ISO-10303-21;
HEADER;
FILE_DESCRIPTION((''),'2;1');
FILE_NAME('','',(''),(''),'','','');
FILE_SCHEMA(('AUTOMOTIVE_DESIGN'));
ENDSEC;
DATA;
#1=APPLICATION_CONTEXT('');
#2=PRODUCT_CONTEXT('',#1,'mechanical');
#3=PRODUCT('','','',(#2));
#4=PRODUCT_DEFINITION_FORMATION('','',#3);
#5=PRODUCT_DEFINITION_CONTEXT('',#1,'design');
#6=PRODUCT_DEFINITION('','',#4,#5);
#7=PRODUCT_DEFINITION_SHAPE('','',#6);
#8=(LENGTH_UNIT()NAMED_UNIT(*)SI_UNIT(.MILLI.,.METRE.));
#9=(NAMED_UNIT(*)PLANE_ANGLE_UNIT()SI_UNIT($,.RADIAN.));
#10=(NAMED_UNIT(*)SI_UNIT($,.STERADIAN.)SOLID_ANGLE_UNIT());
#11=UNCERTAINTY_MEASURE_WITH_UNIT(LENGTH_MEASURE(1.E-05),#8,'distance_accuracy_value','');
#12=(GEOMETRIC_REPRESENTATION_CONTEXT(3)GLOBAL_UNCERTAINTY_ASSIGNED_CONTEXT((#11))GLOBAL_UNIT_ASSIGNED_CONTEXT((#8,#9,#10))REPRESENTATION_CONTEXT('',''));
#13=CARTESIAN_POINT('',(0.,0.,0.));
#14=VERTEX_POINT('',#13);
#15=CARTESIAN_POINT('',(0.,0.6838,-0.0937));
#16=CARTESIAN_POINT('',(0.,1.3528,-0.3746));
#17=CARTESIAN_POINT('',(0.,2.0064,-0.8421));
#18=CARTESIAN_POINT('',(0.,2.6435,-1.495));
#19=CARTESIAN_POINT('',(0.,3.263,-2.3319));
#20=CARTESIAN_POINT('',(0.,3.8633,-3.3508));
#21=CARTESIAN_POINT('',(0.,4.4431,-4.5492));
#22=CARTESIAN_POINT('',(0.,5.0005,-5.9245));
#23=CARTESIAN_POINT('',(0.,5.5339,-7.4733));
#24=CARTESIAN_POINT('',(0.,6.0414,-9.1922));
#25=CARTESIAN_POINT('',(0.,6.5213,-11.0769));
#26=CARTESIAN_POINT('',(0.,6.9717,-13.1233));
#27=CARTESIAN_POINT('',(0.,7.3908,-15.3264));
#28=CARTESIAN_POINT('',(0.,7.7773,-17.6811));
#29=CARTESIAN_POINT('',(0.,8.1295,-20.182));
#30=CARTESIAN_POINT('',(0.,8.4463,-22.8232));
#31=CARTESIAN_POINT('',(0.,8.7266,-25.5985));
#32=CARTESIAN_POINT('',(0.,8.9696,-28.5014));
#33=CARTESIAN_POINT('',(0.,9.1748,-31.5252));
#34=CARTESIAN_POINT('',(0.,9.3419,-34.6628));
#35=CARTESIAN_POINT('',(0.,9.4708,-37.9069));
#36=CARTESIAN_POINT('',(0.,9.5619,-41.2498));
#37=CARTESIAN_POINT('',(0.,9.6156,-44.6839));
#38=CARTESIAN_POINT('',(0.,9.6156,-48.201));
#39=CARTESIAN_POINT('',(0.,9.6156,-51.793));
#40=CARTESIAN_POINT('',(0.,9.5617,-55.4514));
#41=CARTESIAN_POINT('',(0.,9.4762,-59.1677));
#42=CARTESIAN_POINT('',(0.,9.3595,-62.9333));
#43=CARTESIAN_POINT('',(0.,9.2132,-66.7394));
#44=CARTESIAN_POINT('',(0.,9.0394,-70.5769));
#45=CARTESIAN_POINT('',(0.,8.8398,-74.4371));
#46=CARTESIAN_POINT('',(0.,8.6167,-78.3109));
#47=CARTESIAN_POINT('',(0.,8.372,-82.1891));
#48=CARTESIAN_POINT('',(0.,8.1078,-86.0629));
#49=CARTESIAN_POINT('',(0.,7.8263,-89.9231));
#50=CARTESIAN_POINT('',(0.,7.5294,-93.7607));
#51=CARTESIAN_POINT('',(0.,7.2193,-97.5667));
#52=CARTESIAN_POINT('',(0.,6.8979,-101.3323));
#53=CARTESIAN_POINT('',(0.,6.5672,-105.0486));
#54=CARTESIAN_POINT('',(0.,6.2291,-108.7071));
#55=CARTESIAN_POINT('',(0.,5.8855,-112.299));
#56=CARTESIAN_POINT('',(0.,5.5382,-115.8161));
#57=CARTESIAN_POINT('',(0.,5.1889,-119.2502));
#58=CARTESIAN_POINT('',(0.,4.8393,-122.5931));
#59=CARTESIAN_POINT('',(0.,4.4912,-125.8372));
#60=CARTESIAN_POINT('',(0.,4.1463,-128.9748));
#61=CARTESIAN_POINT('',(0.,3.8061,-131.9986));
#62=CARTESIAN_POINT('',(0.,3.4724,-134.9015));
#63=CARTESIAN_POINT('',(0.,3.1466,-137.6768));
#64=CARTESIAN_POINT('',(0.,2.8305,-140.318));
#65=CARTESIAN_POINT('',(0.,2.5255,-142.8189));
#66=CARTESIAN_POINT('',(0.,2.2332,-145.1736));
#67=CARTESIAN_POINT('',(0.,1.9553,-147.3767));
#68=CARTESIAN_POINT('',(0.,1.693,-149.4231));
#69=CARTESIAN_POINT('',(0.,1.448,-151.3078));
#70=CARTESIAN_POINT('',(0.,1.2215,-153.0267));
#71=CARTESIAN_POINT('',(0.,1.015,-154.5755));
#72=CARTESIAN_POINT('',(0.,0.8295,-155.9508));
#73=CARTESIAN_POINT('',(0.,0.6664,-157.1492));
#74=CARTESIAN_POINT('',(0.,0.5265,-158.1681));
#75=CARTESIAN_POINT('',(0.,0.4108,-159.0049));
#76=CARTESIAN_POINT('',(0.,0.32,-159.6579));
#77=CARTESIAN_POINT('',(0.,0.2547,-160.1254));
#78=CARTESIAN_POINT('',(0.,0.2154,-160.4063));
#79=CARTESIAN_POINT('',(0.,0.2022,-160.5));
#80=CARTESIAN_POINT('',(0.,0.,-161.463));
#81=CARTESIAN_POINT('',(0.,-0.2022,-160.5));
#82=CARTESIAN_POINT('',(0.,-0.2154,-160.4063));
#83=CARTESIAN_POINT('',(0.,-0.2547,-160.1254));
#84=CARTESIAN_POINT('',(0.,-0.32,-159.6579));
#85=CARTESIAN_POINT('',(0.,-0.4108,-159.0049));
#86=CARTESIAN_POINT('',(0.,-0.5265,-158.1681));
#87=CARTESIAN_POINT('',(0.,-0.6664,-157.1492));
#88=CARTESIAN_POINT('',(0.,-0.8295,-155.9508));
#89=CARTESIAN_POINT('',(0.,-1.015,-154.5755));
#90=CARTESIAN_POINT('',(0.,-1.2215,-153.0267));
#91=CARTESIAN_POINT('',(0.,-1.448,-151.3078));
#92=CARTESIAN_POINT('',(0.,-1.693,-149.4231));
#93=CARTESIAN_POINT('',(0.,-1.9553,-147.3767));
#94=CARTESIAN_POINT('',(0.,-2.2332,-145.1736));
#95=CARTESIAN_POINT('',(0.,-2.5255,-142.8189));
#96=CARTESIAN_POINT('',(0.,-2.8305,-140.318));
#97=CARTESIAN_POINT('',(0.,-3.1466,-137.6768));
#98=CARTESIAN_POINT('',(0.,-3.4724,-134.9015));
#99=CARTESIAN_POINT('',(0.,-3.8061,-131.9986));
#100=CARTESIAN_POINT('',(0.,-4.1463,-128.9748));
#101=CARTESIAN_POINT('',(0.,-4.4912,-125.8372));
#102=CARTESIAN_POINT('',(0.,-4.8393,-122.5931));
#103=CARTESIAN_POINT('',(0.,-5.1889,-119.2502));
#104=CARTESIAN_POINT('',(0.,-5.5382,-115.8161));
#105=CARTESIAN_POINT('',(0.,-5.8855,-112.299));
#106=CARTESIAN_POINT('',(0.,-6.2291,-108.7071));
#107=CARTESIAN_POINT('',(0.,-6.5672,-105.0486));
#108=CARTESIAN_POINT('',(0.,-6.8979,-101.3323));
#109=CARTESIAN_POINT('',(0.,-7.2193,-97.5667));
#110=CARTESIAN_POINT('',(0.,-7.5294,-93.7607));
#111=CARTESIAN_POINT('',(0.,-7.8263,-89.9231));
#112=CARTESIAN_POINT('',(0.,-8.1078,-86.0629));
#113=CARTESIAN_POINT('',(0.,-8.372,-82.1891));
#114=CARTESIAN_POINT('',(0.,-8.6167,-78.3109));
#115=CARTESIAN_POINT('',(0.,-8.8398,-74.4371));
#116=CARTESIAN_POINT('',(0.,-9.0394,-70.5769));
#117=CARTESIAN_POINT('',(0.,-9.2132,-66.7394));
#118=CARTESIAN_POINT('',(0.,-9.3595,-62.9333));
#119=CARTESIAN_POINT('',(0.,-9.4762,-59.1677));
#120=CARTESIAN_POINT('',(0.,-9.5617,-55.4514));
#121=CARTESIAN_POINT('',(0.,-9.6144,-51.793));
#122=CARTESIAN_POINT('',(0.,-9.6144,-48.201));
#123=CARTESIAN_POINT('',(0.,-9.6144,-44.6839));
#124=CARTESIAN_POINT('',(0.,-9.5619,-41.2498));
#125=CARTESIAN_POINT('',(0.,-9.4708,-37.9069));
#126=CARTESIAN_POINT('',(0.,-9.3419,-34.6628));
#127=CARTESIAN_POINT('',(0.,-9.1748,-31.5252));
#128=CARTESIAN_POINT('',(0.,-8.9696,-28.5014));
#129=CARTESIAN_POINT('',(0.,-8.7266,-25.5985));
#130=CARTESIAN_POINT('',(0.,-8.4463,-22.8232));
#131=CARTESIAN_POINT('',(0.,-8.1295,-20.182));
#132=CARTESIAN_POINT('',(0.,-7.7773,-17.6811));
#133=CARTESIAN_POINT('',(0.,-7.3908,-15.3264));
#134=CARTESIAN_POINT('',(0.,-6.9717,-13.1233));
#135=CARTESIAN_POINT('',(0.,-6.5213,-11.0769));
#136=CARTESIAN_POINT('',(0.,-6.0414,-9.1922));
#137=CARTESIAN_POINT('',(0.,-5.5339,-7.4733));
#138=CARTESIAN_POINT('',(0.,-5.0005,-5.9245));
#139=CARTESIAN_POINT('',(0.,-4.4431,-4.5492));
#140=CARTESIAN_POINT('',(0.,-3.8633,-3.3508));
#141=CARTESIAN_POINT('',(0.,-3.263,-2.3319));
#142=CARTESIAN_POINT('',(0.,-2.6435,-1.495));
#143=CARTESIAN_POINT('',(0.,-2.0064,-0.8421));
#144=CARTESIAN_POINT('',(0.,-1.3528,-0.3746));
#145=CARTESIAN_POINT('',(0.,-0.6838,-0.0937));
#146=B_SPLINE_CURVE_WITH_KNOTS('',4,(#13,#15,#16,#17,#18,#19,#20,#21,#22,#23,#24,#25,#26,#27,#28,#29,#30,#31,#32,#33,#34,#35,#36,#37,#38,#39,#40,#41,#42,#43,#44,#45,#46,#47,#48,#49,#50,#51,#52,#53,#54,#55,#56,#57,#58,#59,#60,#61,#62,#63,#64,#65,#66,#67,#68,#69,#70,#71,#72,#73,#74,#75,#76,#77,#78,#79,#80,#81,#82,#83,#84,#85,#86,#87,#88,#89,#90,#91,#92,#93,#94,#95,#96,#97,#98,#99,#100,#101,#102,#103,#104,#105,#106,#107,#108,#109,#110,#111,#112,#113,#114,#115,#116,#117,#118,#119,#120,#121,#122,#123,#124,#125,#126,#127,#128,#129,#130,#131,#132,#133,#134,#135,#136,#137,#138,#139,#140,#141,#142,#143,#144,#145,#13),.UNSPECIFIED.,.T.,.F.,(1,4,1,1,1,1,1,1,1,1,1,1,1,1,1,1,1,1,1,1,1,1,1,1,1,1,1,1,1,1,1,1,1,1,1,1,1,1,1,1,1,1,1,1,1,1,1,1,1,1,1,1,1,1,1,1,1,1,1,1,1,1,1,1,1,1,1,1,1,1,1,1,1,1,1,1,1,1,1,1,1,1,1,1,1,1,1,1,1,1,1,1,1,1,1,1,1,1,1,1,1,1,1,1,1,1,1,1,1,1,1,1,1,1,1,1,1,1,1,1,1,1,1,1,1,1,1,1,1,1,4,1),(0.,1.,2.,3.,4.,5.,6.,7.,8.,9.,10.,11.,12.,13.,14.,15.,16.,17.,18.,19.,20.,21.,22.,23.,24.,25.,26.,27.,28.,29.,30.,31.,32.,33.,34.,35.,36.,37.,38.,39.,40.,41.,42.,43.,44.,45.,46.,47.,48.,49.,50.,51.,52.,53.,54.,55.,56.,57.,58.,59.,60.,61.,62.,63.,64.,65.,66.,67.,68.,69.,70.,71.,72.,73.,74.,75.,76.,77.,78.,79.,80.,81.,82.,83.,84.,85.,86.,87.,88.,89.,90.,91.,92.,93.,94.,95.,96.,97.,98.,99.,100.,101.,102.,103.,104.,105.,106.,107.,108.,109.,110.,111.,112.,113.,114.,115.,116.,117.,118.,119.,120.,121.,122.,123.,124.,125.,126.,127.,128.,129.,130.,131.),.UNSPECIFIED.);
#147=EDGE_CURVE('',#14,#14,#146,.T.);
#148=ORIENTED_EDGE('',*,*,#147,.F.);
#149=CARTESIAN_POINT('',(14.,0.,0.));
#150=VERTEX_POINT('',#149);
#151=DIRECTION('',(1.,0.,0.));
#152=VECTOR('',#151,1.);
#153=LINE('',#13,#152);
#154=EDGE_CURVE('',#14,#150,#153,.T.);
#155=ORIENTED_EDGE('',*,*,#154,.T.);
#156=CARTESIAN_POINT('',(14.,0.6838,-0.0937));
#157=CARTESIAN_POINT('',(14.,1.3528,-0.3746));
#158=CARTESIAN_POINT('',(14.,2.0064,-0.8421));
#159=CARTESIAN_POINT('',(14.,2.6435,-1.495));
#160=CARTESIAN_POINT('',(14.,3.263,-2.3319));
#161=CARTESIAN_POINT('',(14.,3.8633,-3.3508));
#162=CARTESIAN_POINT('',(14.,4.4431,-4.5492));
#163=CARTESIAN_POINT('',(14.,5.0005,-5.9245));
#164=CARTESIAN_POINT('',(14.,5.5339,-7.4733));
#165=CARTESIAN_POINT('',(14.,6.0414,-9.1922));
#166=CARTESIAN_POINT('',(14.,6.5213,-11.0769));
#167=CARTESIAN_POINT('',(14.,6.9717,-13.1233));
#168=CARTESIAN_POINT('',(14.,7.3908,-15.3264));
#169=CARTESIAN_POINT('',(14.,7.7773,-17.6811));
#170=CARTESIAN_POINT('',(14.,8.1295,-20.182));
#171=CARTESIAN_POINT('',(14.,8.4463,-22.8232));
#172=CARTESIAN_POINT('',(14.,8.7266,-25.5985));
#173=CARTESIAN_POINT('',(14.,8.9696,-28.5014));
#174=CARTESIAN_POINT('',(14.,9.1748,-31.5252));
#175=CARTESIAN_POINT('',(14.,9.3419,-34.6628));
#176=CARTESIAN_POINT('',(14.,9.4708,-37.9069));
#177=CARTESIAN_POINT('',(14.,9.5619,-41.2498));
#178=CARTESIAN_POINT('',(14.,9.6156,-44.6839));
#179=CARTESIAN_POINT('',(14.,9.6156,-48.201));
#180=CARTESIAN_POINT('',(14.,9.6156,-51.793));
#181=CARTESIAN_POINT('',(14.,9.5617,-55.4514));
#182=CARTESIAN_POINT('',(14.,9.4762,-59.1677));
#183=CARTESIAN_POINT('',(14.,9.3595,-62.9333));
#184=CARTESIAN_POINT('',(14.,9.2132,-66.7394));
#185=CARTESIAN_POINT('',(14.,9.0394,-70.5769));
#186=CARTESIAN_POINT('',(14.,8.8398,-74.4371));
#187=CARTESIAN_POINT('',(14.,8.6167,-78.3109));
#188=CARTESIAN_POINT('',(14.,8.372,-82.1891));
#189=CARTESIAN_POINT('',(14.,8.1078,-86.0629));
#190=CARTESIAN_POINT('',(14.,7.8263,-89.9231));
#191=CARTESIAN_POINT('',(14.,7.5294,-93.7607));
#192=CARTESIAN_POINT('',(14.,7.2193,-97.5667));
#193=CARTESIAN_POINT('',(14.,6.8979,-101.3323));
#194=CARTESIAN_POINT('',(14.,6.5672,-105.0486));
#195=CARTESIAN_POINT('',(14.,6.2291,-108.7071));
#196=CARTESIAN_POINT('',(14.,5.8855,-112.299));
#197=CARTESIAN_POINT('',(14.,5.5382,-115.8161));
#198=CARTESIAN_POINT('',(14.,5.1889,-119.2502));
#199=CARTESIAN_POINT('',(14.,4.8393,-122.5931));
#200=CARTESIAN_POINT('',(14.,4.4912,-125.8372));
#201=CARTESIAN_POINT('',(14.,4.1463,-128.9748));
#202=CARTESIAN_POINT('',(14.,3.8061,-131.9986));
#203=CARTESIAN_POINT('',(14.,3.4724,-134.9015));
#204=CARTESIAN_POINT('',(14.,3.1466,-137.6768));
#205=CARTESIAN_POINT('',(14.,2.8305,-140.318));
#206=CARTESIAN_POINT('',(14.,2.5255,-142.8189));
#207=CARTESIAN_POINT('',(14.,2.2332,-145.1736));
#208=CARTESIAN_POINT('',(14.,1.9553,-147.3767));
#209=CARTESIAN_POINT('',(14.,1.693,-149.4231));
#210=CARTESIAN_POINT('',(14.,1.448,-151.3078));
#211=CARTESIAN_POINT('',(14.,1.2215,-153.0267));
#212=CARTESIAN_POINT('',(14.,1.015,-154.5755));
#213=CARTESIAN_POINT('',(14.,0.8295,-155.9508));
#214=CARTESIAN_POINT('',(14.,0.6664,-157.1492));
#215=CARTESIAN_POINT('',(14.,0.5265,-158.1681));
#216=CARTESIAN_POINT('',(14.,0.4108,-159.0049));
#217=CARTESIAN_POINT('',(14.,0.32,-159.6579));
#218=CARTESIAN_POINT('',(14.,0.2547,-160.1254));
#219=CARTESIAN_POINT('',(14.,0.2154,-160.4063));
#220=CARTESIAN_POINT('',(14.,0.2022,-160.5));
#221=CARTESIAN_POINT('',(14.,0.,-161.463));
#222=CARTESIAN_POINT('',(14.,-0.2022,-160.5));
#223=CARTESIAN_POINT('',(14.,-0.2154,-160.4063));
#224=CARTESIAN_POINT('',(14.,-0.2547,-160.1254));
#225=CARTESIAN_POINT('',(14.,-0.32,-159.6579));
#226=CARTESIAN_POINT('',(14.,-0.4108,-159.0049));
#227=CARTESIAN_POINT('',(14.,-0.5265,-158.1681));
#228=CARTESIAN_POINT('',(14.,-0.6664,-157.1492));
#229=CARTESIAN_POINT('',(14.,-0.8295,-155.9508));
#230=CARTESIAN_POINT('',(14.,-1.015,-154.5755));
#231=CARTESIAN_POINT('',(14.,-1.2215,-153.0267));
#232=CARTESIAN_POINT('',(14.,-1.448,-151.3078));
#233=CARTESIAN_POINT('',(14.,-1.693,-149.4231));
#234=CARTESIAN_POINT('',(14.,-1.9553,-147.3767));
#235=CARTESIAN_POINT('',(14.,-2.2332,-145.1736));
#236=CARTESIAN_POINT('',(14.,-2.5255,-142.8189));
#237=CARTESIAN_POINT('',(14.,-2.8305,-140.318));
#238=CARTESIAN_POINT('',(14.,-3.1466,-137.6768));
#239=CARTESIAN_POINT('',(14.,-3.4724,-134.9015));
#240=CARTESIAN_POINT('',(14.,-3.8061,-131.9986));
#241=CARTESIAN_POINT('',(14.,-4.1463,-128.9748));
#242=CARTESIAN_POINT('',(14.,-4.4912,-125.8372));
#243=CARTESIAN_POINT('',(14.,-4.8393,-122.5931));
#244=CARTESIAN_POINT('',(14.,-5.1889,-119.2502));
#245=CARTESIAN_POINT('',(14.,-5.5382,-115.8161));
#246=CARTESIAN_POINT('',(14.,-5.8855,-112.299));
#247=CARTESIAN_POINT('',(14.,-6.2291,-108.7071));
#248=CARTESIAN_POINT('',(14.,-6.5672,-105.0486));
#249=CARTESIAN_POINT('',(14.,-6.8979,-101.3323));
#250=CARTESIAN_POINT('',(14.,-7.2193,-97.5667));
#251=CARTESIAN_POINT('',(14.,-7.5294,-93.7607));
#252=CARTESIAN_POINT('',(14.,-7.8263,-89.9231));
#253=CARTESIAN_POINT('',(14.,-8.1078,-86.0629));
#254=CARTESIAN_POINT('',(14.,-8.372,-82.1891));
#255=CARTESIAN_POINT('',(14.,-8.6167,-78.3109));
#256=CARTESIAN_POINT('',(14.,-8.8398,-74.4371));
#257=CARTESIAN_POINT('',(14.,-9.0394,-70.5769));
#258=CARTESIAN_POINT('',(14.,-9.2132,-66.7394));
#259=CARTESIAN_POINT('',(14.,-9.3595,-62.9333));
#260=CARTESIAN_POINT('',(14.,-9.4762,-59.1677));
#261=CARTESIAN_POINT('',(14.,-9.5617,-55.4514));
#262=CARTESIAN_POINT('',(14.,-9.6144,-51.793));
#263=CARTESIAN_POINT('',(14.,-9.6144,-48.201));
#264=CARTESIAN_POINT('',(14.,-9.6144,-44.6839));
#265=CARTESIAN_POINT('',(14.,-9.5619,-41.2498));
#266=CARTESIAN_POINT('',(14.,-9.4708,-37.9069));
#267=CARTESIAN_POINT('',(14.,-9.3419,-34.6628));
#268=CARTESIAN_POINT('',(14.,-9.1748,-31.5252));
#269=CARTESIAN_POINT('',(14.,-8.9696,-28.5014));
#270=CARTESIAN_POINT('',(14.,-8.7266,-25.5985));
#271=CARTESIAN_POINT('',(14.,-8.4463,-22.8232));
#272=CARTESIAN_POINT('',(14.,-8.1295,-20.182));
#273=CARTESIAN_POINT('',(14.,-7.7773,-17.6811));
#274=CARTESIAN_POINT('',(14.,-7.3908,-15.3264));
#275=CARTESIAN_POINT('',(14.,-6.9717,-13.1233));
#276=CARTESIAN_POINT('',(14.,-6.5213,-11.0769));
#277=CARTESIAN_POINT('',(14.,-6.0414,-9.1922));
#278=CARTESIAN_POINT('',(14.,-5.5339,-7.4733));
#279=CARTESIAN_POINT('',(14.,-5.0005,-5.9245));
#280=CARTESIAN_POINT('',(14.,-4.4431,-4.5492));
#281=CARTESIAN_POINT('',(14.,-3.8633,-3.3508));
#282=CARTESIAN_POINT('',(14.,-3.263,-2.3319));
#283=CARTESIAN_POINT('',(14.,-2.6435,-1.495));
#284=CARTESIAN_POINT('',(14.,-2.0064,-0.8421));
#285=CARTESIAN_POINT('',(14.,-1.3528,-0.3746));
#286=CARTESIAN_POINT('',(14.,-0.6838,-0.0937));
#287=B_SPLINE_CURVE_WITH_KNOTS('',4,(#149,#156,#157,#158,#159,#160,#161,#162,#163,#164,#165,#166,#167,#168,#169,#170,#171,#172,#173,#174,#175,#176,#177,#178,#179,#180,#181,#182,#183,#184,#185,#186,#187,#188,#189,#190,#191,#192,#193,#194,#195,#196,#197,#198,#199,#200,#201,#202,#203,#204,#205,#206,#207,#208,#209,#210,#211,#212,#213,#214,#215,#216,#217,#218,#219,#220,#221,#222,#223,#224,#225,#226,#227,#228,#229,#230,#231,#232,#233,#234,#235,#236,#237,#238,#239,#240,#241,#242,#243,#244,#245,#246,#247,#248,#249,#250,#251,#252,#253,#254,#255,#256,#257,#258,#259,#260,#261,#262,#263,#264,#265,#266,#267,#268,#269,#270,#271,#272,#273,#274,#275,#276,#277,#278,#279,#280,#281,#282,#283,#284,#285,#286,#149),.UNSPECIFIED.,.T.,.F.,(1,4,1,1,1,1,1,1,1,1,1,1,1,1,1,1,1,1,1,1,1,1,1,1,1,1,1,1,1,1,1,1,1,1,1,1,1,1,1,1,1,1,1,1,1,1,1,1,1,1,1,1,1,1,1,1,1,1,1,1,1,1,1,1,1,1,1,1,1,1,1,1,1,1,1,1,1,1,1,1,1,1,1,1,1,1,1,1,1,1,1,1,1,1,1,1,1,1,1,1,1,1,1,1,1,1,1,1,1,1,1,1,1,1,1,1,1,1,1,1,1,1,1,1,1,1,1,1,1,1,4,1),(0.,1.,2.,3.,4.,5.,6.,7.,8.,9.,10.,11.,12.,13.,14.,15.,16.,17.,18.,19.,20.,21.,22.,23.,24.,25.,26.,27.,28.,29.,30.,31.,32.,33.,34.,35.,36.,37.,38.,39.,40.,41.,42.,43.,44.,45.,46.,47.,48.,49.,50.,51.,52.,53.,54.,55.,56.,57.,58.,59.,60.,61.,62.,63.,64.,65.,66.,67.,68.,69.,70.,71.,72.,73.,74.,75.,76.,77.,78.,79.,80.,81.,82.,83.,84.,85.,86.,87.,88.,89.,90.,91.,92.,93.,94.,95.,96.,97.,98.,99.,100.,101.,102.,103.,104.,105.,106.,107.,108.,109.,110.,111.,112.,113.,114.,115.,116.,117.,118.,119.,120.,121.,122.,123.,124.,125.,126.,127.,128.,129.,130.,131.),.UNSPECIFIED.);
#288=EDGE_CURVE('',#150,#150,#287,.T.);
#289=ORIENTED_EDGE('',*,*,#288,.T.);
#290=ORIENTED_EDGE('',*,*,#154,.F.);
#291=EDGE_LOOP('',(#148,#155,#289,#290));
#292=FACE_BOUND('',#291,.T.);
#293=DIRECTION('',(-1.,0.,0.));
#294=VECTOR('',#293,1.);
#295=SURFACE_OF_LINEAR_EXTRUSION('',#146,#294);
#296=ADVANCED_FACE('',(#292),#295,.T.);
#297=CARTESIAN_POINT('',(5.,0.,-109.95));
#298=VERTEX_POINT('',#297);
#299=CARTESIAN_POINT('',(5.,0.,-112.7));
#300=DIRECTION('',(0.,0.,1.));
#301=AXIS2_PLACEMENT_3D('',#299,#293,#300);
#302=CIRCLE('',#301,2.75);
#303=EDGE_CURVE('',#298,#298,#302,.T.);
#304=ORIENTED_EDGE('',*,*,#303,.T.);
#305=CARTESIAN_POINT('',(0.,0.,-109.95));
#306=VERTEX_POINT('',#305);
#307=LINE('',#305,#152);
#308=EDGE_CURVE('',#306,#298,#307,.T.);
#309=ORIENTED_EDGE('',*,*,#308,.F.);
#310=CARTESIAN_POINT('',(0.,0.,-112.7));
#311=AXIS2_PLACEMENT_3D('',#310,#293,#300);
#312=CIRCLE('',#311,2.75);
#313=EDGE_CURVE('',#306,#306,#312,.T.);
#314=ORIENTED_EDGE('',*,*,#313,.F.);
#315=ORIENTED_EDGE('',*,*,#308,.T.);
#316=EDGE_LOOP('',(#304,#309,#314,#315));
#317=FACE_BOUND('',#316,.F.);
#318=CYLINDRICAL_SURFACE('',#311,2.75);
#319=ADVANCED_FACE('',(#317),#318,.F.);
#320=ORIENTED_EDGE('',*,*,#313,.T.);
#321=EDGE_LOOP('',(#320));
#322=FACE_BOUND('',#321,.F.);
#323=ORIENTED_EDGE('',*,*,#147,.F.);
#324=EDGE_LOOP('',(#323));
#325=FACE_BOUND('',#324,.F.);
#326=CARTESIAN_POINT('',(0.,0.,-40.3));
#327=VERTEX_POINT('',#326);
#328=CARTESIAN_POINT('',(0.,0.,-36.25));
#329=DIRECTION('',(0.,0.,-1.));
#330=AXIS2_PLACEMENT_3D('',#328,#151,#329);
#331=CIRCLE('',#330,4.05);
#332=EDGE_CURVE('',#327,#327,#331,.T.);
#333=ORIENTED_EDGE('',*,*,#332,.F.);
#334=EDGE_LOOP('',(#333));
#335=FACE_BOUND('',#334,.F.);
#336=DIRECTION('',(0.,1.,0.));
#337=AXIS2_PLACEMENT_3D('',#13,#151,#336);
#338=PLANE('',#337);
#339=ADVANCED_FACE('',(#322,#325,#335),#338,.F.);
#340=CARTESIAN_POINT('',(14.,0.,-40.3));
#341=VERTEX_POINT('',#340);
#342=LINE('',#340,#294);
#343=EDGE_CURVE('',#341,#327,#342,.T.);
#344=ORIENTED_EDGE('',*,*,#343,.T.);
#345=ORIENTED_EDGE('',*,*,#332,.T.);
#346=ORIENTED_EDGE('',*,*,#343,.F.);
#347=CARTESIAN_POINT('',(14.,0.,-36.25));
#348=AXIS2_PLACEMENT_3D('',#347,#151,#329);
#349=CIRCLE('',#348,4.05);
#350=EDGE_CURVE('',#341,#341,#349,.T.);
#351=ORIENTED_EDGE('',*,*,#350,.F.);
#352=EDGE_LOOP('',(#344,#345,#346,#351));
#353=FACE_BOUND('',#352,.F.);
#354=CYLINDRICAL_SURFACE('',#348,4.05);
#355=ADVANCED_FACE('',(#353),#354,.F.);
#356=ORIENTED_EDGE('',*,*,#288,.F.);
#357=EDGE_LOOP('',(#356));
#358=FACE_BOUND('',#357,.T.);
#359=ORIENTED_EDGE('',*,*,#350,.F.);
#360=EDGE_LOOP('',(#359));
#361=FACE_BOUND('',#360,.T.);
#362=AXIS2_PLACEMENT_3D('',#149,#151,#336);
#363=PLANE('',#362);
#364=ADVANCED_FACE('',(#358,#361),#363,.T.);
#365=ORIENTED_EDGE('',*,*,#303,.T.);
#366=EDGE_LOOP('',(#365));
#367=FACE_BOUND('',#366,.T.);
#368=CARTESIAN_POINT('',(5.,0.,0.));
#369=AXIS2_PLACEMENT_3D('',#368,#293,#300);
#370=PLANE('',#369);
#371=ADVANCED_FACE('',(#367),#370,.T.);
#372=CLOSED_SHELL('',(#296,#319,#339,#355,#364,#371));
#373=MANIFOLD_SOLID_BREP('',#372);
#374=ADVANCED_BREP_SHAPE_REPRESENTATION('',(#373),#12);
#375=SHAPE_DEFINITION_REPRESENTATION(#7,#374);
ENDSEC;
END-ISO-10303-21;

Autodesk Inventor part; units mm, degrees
ref_plane "YZ Plane" through (0, 0, 0) normal (1, 0, 0) x (0, 1, 0)
ref_plane "XZ Plane" through (0, 0, 0) normal (0, 1, 0) x (-1, 0, 0)
ref_plane "XY Plane" through (0, 0, 0) normal (0, 0, 1) x (1, 0, 0)
sketch "Sketch9" plane through (0, 0, 0) normal (1, 0, 0) x (0, 1, 0)
  line L0 (0, 0) -> (0.6838, -0.0937) construction
  line L1 (0.6838, -0.0937) -> (1.3528, -0.3746) construction
  line L2 (1.3528, -0.3746) -> (2.0064, -0.8421) construction
  line L3 (2.0064, -0.8421) -> (2.6435, -1.495) construction
  line L4 (2.6435, -1.495) -> (3.263, -2.3319) construction
  line L5 (3.263, -2.3319) -> (3.8633, -3.3508) construction
  line L6 (3.8633, -3.3508) -> (4.4431, -4.5492) construction
  line L7 (4.4431, -4.5492) -> (5.0005, -5.9245) construction
  line L8 (5.0005, -5.9245) -> (5.5339, -7.4733) construction
  line L9 (5.5339, -7.4733) -> (6.0414, -9.1922) construction
  line L10 (6.0414, -9.1922) -> (6.5213, -11.0769) construction
  line L11 (6.5213, -11.0769) -> (6.9717, -13.1233) construction
  line L12 (6.9717, -13.1233) -> (7.3908, -15.3264) construction
  line L13 (7.3908, -15.3264) -> (7.7773, -17.6811) construction
  line L14 (7.7773, -17.6811) -> (8.1295, -20.182) construction
  line L15 (8.1295, -20.182) -> (8.4463, -22.8232) construction
  line L16 (8.4463, -22.8232) -> (8.7266, -25.5985) construction
  line L17 (8.7266, -25.5985) -> (8.9696, -28.5014) construction
  line L18 (8.9696, -28.5014) -> (9.1748, -31.5252) construction
  line L19 (9.1748, -31.5252) -> (9.3419, -34.6628) construction
  line L20 (9.3419, -34.6628) -> (9.4708, -37.9069) construction
  line L21 (9.4708, -37.9069) -> (9.5619, -41.2498) construction
  line L22 (9.5619, -41.2498) -> (9.6156, -44.6839) construction
  line L23 (9.6156, -44.6839) -> (9.6156, -48.201) construction
  line L24 (9.6156, -48.201) -> (9.6156, -51.793) construction
  line L25 (9.6156, -51.793) -> (9.5617, -55.4514) construction
  line L26 (9.5617, -55.4514) -> (9.4762, -59.1677) construction
  line L27 (9.4762, -59.1677) -> (9.3595, -62.9333) construction
  line L28 (9.3595, -62.9333) -> (9.2132, -66.7394) construction
  line L29 (9.2132, -66.7394) -> (9.0394, -70.5769) construction
  line L30 (9.0394, -70.5769) -> (8.8398, -74.4371) construction
  line L31 (8.8398, -74.4371) -> (8.6167, -78.3109) construction
  line L32 (8.6167, -78.3109) -> (8.372, -82.1891) construction
  line L33 (8.372, -82.1891) -> (8.1078, -86.0629) construction
  line L34 (8.1078, -86.0629) -> (7.8263, -89.9231) construction
  line L35 (7.8263, -89.9231) -> (7.5294, -93.7607) construction
  line L36 (7.5294, -93.7607) -> (7.2193, -97.5667) construction
  line L37 (7.2193, -97.5667) -> (6.8979, -101.3323) construction
  line L38 (6.8979, -101.3323) -> (6.5672, -105.0486) construction
  line L39 (6.5672, -105.0486) -> (6.2291, -108.7071) construction
  line L40 (6.2291, -108.7071) -> (5.8855, -112.299) construction
  line L41 (5.8855, -112.299) -> (5.5382, -115.8161) construction
  line L42 (5.5382, -115.8161) -> (5.1889, -119.2502) construction
  line L43 (5.1889, -119.2502) -> (4.8393, -122.5931) construction
  line L44 (4.8393, -122.5931) -> (4.4912, -125.8372) construction
  line L45 (4.4912, -125.8372) -> (4.1463, -128.9748) construction
  line L46 (4.1463, -128.9748) -> (3.8061, -131.9986) construction
  line L47 (3.8061, -131.9986) -> (3.4724, -134.9015) construction
  line L48 (3.4724, -134.9015) -> (3.1466, -137.6768) construction
  line L49 (3.1466, -137.6768) -> (2.8305, -140.318) construction
  line L50 (2.8305, -140.318) -> (2.5255, -142.8189) construction
  line L51 (2.5255, -142.8189) -> (2.2332, -145.1736) construction
  line L52 (2.2332, -145.1736) -> (1.9553, -147.3767) construction
  line L53 (1.9553, -147.3767) -> (1.693, -149.4231) construction
  line L54 (1.693, -149.4231) -> (1.448, -151.3078) construction
  line L55 (1.448, -151.3078) -> (1.2215, -153.0267) construction
  line L56 (1.2215, -153.0267) -> (1.015, -154.5755) construction
  line L57 (1.015, -154.5755) -> (0.8295, -155.9508) construction
  line L58 (0.8295, -155.9508) -> (0.6664, -157.1492) construction
  line L59 (0.6664, -157.1492) -> (0.5265, -158.1681) construction
  line L60 (0.5265, -158.1681) -> (0.4108, -159.0049) construction
  line L61 (0.4108, -159.0049) -> (0.32, -159.6579) construction
  line L62 (0.32, -159.6579) -> (0.2547, -160.1254) construction
  line L63 (0.2547, -160.1254) -> (0.2154, -160.4063) construction
  line L64 (0.2154, -160.4063) -> (0.2022, -160.5) construction
  line L65 (0.2022, -160.5) -> (0, -161.463) construction
  line L66 (0, -161.463) -> (-0.2022, -160.5) construction
  line L67 (-0.2022, -160.5) -> (-0.2154, -160.4063) construction
  line L68 (-0.2154, -160.4063) -> (-0.2547, -160.1254) construction
  line L69 (-0.2547, -160.1254) -> (-0.32, -159.6579) construction
  line L70 (-0.32, -159.6579) -> (-0.4108, -159.0049) construction
  line L71 (-0.4108, -159.0049) -> (-0.5265, -158.1681) construction
  line L72 (-0.5265, -158.1681) -> (-0.6664, -157.1492) construction
  line L73 (-0.6664, -157.1492) -> (-0.8295, -155.9508) construction
  line L74 (-0.8295, -155.9508) -> (-1.015, -154.5755) construction
  line L75 (-1.015, -154.5755) -> (-1.2215, -153.0267) construction
  line L76 (-1.2215, -153.0267) -> (-1.448, -151.3078) construction
  line L77 (-1.448, -151.3078) -> (-1.693, -149.4231) construction
  line L78 (-1.693, -149.4231) -> (-1.9553, -147.3767) construction
  line L79 (-1.9553, -147.3767) -> (-2.2332, -145.1736) construction
  line L80 (-2.2332, -145.1736) -> (-2.5255, -142.8189) construction
  line L81 (-2.5255, -142.8189) -> (-2.8305, -140.318) construction
  line L82 (-2.8305, -140.318) -> (-3.1466, -137.6768) construction
  line L83 (-3.1466, -137.6768) -> (-3.4724, -134.9015) construction
  line L84 (-3.4724, -134.9015) -> (-3.8061, -131.9986) construction
  line L85 (-3.8061, -131.9986) -> (-4.1463, -128.9748) construction
  line L86 (-4.1463, -128.9748) -> (-4.4912, -125.8372) construction
  line L87 (-4.4912, -125.8372) -> (-4.8393, -122.5931) construction
  line L88 (-4.8393, -122.5931) -> (-5.1889, -119.2502) construction
  line L89 (-5.1889, -119.2502) -> (-5.5382, -115.8161) construction
  line L90 (-5.5382, -115.8161) -> (-5.8855, -112.299) construction
  line L91 (-5.8855, -112.299) -> (-6.2291, -108.7071) construction
  line L92 (-6.2291, -108.7071) -> (-6.5672, -105.0486) construction
  line L93 (-6.5672, -105.0486) -> (-6.8979, -101.3323) construction
  line L94 (-6.8979, -101.3323) -> (-7.2193, -97.5667) construction
  line L95 (-7.2193, -97.5667) -> (-7.5294, -93.7607) construction
  line L96 (-7.5294, -93.7607) -> (-7.8263, -89.9231) construction
  line L97 (-7.8263, -89.9231) -> (-8.1078, -86.0629) construction
  line L98 (-8.1078, -86.0629) -> (-8.372, -82.1891) construction
  line L99 (-8.372, -82.1891) -> (-8.6167, -78.3109) construction
  line L100 (-8.6167, -78.3109) -> (-8.8398, -74.4371) construction
  line L101 (-8.8398, -74.4371) -> (-9.0394, -70.5769) construction
  line L102 (-9.0394, -70.5769) -> (-9.2132, -66.7394) construction
  line L103 (-9.2132, -66.7394) -> (-9.3595, -62.9333) construction
  line L104 (-9.3595, -62.9333) -> (-9.4762, -59.1677) construction
  line L105 (-9.4762, -59.1677) -> (-9.5617, -55.4514) construction
  line L106 (-9.5617, -55.4514) -> (-9.6144, -51.793) construction
  line L107 (-9.6144, -51.793) -> (-9.6144, -48.201) construction
  line L108 (-9.6144, -48.201) -> (-9.6144, -44.6839) construction
  line L109 (-9.6144, -44.6839) -> (-9.5619, -41.2498) construction
  line L110 (-9.5619, -41.2498) -> (-9.4708, -37.9069) construction
  line L111 (-9.4708, -37.9069) -> (-9.3419, -34.6628) construction
  line L112 (-9.3419, -34.6628) -> (-9.1748, -31.5252) construction
  line L113 (-9.1748, -31.5252) -> (-8.9696, -28.5014) construction
  line L114 (-8.9696, -28.5014) -> (-8.7266, -25.5985) construction
  line L115 (-8.7266, -25.5985) -> (-8.4463, -22.8232) construction
  line L116 (-8.4463, -22.8232) -> (-8.1295, -20.182) construction
  line L117 (-8.1295, -20.182) -> (-7.7773, -17.6811) construction
  line L118 (-7.7773, -17.6811) -> (-7.3908, -15.3264) construction
  line L119 (-7.3908, -15.3264) -> (-6.9717, -13.1233) construction
  line L120 (-6.9717, -13.1233) -> (-6.5213, -11.0769) construction
  line L121 (-6.5213, -11.0769) -> (-6.0414, -9.1922) construction
  line L122 (-6.0414, -9.1922) -> (-5.5339, -7.4733) construction
  line L123 (-5.5339, -7.4733) -> (-5.0005, -5.9245) construction
  line L124 (-5.0005, -5.9245) -> (-4.4431, -4.5492) construction
  line L125 (-4.4431, -4.5492) -> (-3.8633, -3.3508) construction
  line L126 (-3.8633, -3.3508) -> (-3.263, -2.3319) construction
  line L127 (-3.263, -2.3319) -> (-2.6435, -1.495) construction
  line L128 (-2.6435, -1.495) -> (-2.0064, -0.8421) construction
  line L129 (-2.0064, -0.8421) -> (-1.3528, -0.3746) construction
  line L130 (-1.3528, -0.3746) -> (-0.6838, -0.0937) construction
  line L131 (-0.6838, -0.0937) -> (0, 0) construction
  spline S0 degree 4 poles (0, 0) (0.6838, -0.0937) (1.3528, -0.3746) (2.0064, -0.8421) (2.6435, -1.495) (3.263, -2.3319) (3.8633, -3.3508) (4.4431, -4.5492) (5.0005, -5.9245) (5.5339, -7.4733) (6.0414, -9.1922) (6.5213, -11.0769) (6.9717, -13.1233) (7.3908, -15.3264) (7.7773, -17.6811) (8.1295, -20.182) (8.4463, -22.8232) (8.7266, -25.5985) (8.9696, -28.5014) (9.1748, -31.5252) (9.3419, -34.6628) (9.4708, -37.9069) (9.5619, -41.2498) (9.6156, -44.6839) (9.6156, -48.201) (9.6156, -51.793) (9.5617, -55.4514) (9.4762, -59.1677) (9.3595, -62.9333) (9.2132, -66.7394) (9.0394, -70.5769) (8.8398, -74.4371) (8.6167, -78.3109) (8.372, -82.1891) (8.1078, -86.0629) (7.8263, -89.9231) (7.5294, -93.7607) (7.2193, -97.5667) (6.8979, -101.3323) (6.5672, -105.0486) (6.2291, -108.7071) (5.8855, -112.299) (5.5382, -115.8161) (5.1889, -119.2502) (4.8393, -122.5931) (4.4912, -125.8372) (4.1463, -128.9748) (3.8061, -131.9986) (3.4724, -134.9015) (3.1466, -137.6768) (2.8305, -140.318) (2.5255, -142.8189) (2.2332, -145.1736) (1.9553, -147.3767) (1.693, -149.4231) (1.448, -151.3078) (1.2215, -153.0267) (1.015, -154.5755) (0.8295, -155.9508) (0.6664, -157.1492) (0.5265, -158.1681) (0.4108, -159.0049) (0.32, -159.6579) (0.2547, -160.1254) (0.2154, -160.4063) (0.2022, -160.5) (0, -161.463) (-0.2022, -160.5) (-0.2154, -160.4063) (-0.2547, -160.1254) (-0.32, -159.6579) (-0.4108, -159.0049) (-0.5265, -158.1681) (-0.6664, -157.1492) (-0.8295, -155.9508) (-1.015, -154.5755) (-1.2215, -153.0267) (-1.448, -151.3078) (-1.693, -149.4231) (-1.9553, -147.3767) (-2.2332, -145.1736) (-2.5255, -142.8189) (-2.8305, -140.318) (-3.1466, -137.6768) (-3.4724, -134.9015) (-3.8061, -131.9986) (-4.1463, -128.9748) (-4.4912, -125.8372) (-4.8393, -122.5931) (-5.1889, -119.2502) (-5.5382, -115.8161) (-5.8855, -112.299) (-6.2291, -108.7071) (-6.5672, -105.0486) (-6.8979, -101.3323) (-7.2193, -97.5667) (-7.5294, -93.7607) (-7.8263, -89.9231) (-8.1078, -86.0629) (-8.372, -82.1891) (-8.6167, -78.3109) (-8.8398, -74.4371) (-9.0394, -70.5769) (-9.2132, -66.7394) (-9.3595, -62.9333) (-9.4762, -59.1677) (-9.5617, -55.4514) (-9.6144, -51.793) (-9.6144, -48.201) (-9.6144, -44.6839) (-9.5619, -41.2498) (-9.4708, -37.9069) (-9.3419, -34.6628) (-9.1748, -31.5252) (-8.9696, -28.5014) (-8.7266, -25.5985) (-8.4463, -22.8232) (-8.1295, -20.182) (-7.7773, -17.6811) (-7.3908, -15.3264) (-6.9717, -13.1233) (-6.5213, -11.0769) (-6.0414, -9.1922) (-5.5339, -7.4733) (-5.0005, -5.9245) (-4.4431, -4.5492) (-3.8633, -3.3508) (-3.263, -2.3319) (-2.6435, -1.495) (-2.0064, -0.8421) (-1.3528, -0.3746) (-0.6838, -0.0937) (0, 0) knots 1 1 1 1 1 2 3 4 5 6 7 8 9 10 11 12 13 14 15 16 17 18 19 20 21 22 23 24 25 26 27 28 29 30 31 32 33 34 35 36 37 38 39 40 41 42 43 44 45 46 47 48 49 50 51 52 53 54 55 56 57 58 59 60 61 62 63 64 65 66 67 68 69 70 71 72 73 74 75 76 77 78 79 80 81 82 83 84 85 86 87 88 89 90 91 92 93 94 95 96 97 98 99 100 101 102 103 104 105 106 107 108 109 110 111 112 113 114 115 116 117 118 119 120 121 122 123 124 125 126 127 128 129 130 130 130 130 130
extrude "Extrusion3" add sketch "Sketch9" along normal blind 14
sketch "Sketch10" plane through (14, 0, 0) normal (1, 0, 0) x (0, 0, -1)
  circle A0 centre (36.25, 0) radius 4.05
  point P0 (0, 0)
  dimension "d88" = 8.1
  dimension "d89" = 36.25
extrude "Extrusion4" cut sketch "Sketch10" against normal blind 15
sketch "Sketch12" plane through (0, 0, 0) normal (-1, 0, 0) x (0, 0, 1)
  circle A0 centre (-112.7, 0) radius 2.75
  point P0 (0, 0)
  dimension "d97" = 5.5
  dimension "d98" = 112.7
extrude "Extrusion6" cut sketch "Sketch12" against normal blind 5
properties part number "6P-008" material "Poplar"
